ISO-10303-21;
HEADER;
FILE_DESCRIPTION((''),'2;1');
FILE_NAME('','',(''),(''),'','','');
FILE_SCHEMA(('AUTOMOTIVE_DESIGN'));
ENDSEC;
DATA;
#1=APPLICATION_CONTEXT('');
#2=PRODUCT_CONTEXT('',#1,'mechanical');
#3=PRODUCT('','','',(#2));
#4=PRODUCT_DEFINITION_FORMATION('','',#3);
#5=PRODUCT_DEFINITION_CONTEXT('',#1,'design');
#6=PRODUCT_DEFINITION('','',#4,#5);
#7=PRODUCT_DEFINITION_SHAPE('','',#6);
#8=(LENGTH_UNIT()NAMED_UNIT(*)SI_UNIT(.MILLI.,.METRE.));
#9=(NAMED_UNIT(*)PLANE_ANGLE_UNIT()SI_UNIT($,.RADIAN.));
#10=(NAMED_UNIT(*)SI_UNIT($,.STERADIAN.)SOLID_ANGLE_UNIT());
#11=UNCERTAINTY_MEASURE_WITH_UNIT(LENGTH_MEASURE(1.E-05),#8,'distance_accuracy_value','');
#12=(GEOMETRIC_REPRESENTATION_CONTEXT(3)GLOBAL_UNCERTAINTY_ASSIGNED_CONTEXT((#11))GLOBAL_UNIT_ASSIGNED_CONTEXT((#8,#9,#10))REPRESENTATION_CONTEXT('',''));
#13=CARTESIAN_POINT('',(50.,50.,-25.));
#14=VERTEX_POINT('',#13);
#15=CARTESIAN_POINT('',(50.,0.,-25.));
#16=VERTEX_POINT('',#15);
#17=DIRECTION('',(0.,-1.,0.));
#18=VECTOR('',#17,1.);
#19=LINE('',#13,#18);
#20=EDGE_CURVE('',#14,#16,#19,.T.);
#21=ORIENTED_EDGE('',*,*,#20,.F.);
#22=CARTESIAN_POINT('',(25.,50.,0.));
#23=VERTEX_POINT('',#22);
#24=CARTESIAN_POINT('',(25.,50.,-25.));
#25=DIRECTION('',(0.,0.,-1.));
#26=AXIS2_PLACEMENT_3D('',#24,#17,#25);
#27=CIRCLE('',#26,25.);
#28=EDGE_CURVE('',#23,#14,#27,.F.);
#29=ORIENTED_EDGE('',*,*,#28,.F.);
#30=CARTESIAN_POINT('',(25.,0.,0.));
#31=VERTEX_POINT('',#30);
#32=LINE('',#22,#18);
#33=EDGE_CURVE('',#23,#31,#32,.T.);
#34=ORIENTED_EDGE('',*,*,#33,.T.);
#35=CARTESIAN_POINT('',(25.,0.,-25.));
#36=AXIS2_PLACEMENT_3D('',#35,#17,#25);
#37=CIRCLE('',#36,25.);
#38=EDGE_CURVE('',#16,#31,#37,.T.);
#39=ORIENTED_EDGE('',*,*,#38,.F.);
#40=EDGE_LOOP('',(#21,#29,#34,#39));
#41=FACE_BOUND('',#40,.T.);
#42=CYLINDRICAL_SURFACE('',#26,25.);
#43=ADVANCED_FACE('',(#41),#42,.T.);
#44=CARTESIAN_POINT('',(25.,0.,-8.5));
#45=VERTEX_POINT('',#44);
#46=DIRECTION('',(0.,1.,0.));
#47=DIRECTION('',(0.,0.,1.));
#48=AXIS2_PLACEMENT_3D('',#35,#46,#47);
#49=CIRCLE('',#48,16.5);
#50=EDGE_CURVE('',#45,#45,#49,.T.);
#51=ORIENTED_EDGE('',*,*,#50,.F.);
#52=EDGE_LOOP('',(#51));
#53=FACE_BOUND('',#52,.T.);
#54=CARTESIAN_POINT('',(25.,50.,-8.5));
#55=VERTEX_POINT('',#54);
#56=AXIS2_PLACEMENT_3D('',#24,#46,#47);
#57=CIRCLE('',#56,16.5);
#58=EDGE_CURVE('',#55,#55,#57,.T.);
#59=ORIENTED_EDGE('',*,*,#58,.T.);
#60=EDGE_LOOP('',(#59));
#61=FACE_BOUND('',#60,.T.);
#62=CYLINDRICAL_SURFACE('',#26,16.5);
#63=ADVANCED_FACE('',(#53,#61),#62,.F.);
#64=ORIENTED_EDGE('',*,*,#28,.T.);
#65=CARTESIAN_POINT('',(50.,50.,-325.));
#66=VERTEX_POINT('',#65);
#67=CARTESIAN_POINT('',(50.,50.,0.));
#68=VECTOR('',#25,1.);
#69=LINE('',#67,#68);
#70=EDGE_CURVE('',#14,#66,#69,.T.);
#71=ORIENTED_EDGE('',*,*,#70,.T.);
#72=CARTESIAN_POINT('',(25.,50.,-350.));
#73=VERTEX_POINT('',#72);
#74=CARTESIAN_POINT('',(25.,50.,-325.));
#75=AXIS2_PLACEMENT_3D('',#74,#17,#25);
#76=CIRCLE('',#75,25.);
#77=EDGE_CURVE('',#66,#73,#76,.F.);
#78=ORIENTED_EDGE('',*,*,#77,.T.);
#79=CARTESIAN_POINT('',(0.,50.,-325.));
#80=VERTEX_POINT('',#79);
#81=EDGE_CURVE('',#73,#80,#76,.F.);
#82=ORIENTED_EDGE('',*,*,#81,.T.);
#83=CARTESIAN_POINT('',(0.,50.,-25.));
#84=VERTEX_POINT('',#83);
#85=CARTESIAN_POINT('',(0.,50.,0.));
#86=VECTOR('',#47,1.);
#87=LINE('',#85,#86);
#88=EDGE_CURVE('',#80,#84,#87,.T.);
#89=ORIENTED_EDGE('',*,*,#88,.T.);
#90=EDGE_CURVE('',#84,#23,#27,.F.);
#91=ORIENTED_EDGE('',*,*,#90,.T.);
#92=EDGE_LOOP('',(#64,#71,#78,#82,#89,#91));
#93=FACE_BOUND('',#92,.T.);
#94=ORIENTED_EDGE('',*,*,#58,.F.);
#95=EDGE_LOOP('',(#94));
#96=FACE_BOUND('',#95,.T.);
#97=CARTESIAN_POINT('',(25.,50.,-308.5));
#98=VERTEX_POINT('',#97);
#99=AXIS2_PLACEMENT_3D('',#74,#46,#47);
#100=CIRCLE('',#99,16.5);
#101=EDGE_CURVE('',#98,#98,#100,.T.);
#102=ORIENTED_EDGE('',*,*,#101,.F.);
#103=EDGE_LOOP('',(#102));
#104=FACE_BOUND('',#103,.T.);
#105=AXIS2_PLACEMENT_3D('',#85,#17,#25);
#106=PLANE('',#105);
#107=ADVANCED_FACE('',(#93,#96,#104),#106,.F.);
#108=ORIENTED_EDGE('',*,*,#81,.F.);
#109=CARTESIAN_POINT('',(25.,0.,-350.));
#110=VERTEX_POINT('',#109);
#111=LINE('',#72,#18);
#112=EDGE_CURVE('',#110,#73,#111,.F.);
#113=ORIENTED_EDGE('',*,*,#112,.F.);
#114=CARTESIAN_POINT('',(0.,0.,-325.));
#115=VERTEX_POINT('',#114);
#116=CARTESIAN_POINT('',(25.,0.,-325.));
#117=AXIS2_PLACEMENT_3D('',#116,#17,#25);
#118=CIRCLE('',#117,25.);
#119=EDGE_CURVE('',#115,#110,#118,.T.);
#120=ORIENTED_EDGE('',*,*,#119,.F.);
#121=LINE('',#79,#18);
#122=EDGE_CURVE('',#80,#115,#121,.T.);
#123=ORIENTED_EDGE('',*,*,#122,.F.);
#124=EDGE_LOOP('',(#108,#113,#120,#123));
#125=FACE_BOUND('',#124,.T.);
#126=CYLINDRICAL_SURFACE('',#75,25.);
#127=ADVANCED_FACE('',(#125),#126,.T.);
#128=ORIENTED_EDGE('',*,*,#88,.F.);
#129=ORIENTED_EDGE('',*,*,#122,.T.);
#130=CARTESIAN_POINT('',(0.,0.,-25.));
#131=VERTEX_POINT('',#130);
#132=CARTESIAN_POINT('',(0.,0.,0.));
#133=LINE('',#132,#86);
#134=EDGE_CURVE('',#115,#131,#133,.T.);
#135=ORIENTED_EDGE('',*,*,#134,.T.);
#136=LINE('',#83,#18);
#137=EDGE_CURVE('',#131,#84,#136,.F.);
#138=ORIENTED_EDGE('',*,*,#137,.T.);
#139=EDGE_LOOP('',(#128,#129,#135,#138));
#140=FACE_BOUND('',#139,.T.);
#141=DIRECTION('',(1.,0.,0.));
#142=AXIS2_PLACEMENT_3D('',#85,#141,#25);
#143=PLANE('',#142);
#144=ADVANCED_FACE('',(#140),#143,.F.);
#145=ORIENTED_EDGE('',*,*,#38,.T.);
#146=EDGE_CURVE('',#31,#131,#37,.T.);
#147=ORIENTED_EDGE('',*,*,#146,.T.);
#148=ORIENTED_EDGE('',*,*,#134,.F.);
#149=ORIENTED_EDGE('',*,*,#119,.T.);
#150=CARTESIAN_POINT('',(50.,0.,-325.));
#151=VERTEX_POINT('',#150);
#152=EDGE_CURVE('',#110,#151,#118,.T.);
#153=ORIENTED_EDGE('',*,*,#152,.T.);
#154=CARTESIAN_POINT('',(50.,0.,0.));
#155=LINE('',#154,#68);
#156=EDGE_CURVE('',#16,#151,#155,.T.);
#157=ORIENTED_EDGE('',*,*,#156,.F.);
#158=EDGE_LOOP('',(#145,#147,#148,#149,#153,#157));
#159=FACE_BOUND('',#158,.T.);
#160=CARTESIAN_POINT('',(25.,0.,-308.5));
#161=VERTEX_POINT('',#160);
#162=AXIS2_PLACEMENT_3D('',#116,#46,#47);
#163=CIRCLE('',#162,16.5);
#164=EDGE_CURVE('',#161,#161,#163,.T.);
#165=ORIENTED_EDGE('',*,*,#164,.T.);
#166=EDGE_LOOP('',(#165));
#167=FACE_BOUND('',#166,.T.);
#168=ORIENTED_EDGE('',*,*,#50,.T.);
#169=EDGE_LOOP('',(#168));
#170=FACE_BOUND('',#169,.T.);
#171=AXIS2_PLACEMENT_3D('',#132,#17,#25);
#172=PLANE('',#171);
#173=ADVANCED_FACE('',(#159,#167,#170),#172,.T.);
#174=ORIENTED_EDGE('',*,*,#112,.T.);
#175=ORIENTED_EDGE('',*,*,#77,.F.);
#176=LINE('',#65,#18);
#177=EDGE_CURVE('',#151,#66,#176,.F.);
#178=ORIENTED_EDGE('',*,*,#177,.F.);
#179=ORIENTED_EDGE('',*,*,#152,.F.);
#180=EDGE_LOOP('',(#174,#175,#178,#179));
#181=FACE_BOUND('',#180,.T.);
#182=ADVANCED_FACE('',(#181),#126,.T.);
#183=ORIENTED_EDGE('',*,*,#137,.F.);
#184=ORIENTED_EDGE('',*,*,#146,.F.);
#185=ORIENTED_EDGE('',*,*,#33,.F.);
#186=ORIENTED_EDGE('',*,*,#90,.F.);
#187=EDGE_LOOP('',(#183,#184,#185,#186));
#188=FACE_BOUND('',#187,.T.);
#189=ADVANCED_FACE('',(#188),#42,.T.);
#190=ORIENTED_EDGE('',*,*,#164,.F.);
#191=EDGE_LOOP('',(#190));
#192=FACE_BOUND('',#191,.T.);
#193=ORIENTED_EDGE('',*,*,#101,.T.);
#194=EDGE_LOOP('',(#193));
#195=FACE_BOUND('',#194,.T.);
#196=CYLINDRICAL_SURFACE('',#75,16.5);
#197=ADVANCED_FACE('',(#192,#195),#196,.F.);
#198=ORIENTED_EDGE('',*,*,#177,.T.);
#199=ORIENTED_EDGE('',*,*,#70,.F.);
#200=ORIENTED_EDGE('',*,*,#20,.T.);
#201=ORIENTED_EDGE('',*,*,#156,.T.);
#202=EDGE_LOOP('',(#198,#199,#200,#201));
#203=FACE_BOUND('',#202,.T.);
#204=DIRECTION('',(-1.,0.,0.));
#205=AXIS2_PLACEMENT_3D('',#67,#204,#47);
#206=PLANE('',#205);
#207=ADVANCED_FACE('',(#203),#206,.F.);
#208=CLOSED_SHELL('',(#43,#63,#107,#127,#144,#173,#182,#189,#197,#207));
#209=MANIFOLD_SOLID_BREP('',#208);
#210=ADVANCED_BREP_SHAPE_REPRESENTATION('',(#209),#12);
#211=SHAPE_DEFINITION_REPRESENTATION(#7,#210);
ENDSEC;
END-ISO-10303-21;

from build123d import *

# Parameters (mm, degrees)
SKETCH_2_W      = 50
SKETCH_2_H      = 350
SKETCH_2_R      = 16.5
EXTRUDE_2_DEPTH = 50
FILLET_1_R      = 25
FILLET_2_R      = 25


with BuildPart() as part:
    # 草图2 → 凸台-拉伸2 (new body)
    with BuildSketch(Plane(origin=(0, 0, 0), x_dir=(1, 0, 0), z_dir=(0, 1, 0))):
        with Locations((25, 175)):
            Rectangle(SKETCH_2_W, SKETCH_2_H)
        with Locations(Location((25, 25, 0), (0, 0, 270))):
            Circle(SKETCH_2_R, mode=Mode.SUBTRACT)
        with Locations(Location((25, 325, 0), (0, 0, 270))):
            Circle(SKETCH_2_R, mode=Mode.SUBTRACT)
    extrude(amount=EXTRUDE_2_DEPTH)

    # 圆角1
    fillet_1_edges = [part.edges().sort_by_distance(p)[0] for p in [
        (50, 25, 0),
        (0, 25, 0),
    ]]
    fillet(fillet_1_edges, radius=FILLET_1_R - 0.0001)  # a hair under: the kernel refuses the full size

    # 圆角2
    fillet_2_edges = [part.edges().sort_by_distance(p)[0] for p in [
        (50, 25, -350),
        (0, 25, -350),
    ]]
    fillet(fillet_2_edges, radius=FILLET_2_R - 0.0001)  # a hair under: the kernel refuses the full size


solid = part.part
